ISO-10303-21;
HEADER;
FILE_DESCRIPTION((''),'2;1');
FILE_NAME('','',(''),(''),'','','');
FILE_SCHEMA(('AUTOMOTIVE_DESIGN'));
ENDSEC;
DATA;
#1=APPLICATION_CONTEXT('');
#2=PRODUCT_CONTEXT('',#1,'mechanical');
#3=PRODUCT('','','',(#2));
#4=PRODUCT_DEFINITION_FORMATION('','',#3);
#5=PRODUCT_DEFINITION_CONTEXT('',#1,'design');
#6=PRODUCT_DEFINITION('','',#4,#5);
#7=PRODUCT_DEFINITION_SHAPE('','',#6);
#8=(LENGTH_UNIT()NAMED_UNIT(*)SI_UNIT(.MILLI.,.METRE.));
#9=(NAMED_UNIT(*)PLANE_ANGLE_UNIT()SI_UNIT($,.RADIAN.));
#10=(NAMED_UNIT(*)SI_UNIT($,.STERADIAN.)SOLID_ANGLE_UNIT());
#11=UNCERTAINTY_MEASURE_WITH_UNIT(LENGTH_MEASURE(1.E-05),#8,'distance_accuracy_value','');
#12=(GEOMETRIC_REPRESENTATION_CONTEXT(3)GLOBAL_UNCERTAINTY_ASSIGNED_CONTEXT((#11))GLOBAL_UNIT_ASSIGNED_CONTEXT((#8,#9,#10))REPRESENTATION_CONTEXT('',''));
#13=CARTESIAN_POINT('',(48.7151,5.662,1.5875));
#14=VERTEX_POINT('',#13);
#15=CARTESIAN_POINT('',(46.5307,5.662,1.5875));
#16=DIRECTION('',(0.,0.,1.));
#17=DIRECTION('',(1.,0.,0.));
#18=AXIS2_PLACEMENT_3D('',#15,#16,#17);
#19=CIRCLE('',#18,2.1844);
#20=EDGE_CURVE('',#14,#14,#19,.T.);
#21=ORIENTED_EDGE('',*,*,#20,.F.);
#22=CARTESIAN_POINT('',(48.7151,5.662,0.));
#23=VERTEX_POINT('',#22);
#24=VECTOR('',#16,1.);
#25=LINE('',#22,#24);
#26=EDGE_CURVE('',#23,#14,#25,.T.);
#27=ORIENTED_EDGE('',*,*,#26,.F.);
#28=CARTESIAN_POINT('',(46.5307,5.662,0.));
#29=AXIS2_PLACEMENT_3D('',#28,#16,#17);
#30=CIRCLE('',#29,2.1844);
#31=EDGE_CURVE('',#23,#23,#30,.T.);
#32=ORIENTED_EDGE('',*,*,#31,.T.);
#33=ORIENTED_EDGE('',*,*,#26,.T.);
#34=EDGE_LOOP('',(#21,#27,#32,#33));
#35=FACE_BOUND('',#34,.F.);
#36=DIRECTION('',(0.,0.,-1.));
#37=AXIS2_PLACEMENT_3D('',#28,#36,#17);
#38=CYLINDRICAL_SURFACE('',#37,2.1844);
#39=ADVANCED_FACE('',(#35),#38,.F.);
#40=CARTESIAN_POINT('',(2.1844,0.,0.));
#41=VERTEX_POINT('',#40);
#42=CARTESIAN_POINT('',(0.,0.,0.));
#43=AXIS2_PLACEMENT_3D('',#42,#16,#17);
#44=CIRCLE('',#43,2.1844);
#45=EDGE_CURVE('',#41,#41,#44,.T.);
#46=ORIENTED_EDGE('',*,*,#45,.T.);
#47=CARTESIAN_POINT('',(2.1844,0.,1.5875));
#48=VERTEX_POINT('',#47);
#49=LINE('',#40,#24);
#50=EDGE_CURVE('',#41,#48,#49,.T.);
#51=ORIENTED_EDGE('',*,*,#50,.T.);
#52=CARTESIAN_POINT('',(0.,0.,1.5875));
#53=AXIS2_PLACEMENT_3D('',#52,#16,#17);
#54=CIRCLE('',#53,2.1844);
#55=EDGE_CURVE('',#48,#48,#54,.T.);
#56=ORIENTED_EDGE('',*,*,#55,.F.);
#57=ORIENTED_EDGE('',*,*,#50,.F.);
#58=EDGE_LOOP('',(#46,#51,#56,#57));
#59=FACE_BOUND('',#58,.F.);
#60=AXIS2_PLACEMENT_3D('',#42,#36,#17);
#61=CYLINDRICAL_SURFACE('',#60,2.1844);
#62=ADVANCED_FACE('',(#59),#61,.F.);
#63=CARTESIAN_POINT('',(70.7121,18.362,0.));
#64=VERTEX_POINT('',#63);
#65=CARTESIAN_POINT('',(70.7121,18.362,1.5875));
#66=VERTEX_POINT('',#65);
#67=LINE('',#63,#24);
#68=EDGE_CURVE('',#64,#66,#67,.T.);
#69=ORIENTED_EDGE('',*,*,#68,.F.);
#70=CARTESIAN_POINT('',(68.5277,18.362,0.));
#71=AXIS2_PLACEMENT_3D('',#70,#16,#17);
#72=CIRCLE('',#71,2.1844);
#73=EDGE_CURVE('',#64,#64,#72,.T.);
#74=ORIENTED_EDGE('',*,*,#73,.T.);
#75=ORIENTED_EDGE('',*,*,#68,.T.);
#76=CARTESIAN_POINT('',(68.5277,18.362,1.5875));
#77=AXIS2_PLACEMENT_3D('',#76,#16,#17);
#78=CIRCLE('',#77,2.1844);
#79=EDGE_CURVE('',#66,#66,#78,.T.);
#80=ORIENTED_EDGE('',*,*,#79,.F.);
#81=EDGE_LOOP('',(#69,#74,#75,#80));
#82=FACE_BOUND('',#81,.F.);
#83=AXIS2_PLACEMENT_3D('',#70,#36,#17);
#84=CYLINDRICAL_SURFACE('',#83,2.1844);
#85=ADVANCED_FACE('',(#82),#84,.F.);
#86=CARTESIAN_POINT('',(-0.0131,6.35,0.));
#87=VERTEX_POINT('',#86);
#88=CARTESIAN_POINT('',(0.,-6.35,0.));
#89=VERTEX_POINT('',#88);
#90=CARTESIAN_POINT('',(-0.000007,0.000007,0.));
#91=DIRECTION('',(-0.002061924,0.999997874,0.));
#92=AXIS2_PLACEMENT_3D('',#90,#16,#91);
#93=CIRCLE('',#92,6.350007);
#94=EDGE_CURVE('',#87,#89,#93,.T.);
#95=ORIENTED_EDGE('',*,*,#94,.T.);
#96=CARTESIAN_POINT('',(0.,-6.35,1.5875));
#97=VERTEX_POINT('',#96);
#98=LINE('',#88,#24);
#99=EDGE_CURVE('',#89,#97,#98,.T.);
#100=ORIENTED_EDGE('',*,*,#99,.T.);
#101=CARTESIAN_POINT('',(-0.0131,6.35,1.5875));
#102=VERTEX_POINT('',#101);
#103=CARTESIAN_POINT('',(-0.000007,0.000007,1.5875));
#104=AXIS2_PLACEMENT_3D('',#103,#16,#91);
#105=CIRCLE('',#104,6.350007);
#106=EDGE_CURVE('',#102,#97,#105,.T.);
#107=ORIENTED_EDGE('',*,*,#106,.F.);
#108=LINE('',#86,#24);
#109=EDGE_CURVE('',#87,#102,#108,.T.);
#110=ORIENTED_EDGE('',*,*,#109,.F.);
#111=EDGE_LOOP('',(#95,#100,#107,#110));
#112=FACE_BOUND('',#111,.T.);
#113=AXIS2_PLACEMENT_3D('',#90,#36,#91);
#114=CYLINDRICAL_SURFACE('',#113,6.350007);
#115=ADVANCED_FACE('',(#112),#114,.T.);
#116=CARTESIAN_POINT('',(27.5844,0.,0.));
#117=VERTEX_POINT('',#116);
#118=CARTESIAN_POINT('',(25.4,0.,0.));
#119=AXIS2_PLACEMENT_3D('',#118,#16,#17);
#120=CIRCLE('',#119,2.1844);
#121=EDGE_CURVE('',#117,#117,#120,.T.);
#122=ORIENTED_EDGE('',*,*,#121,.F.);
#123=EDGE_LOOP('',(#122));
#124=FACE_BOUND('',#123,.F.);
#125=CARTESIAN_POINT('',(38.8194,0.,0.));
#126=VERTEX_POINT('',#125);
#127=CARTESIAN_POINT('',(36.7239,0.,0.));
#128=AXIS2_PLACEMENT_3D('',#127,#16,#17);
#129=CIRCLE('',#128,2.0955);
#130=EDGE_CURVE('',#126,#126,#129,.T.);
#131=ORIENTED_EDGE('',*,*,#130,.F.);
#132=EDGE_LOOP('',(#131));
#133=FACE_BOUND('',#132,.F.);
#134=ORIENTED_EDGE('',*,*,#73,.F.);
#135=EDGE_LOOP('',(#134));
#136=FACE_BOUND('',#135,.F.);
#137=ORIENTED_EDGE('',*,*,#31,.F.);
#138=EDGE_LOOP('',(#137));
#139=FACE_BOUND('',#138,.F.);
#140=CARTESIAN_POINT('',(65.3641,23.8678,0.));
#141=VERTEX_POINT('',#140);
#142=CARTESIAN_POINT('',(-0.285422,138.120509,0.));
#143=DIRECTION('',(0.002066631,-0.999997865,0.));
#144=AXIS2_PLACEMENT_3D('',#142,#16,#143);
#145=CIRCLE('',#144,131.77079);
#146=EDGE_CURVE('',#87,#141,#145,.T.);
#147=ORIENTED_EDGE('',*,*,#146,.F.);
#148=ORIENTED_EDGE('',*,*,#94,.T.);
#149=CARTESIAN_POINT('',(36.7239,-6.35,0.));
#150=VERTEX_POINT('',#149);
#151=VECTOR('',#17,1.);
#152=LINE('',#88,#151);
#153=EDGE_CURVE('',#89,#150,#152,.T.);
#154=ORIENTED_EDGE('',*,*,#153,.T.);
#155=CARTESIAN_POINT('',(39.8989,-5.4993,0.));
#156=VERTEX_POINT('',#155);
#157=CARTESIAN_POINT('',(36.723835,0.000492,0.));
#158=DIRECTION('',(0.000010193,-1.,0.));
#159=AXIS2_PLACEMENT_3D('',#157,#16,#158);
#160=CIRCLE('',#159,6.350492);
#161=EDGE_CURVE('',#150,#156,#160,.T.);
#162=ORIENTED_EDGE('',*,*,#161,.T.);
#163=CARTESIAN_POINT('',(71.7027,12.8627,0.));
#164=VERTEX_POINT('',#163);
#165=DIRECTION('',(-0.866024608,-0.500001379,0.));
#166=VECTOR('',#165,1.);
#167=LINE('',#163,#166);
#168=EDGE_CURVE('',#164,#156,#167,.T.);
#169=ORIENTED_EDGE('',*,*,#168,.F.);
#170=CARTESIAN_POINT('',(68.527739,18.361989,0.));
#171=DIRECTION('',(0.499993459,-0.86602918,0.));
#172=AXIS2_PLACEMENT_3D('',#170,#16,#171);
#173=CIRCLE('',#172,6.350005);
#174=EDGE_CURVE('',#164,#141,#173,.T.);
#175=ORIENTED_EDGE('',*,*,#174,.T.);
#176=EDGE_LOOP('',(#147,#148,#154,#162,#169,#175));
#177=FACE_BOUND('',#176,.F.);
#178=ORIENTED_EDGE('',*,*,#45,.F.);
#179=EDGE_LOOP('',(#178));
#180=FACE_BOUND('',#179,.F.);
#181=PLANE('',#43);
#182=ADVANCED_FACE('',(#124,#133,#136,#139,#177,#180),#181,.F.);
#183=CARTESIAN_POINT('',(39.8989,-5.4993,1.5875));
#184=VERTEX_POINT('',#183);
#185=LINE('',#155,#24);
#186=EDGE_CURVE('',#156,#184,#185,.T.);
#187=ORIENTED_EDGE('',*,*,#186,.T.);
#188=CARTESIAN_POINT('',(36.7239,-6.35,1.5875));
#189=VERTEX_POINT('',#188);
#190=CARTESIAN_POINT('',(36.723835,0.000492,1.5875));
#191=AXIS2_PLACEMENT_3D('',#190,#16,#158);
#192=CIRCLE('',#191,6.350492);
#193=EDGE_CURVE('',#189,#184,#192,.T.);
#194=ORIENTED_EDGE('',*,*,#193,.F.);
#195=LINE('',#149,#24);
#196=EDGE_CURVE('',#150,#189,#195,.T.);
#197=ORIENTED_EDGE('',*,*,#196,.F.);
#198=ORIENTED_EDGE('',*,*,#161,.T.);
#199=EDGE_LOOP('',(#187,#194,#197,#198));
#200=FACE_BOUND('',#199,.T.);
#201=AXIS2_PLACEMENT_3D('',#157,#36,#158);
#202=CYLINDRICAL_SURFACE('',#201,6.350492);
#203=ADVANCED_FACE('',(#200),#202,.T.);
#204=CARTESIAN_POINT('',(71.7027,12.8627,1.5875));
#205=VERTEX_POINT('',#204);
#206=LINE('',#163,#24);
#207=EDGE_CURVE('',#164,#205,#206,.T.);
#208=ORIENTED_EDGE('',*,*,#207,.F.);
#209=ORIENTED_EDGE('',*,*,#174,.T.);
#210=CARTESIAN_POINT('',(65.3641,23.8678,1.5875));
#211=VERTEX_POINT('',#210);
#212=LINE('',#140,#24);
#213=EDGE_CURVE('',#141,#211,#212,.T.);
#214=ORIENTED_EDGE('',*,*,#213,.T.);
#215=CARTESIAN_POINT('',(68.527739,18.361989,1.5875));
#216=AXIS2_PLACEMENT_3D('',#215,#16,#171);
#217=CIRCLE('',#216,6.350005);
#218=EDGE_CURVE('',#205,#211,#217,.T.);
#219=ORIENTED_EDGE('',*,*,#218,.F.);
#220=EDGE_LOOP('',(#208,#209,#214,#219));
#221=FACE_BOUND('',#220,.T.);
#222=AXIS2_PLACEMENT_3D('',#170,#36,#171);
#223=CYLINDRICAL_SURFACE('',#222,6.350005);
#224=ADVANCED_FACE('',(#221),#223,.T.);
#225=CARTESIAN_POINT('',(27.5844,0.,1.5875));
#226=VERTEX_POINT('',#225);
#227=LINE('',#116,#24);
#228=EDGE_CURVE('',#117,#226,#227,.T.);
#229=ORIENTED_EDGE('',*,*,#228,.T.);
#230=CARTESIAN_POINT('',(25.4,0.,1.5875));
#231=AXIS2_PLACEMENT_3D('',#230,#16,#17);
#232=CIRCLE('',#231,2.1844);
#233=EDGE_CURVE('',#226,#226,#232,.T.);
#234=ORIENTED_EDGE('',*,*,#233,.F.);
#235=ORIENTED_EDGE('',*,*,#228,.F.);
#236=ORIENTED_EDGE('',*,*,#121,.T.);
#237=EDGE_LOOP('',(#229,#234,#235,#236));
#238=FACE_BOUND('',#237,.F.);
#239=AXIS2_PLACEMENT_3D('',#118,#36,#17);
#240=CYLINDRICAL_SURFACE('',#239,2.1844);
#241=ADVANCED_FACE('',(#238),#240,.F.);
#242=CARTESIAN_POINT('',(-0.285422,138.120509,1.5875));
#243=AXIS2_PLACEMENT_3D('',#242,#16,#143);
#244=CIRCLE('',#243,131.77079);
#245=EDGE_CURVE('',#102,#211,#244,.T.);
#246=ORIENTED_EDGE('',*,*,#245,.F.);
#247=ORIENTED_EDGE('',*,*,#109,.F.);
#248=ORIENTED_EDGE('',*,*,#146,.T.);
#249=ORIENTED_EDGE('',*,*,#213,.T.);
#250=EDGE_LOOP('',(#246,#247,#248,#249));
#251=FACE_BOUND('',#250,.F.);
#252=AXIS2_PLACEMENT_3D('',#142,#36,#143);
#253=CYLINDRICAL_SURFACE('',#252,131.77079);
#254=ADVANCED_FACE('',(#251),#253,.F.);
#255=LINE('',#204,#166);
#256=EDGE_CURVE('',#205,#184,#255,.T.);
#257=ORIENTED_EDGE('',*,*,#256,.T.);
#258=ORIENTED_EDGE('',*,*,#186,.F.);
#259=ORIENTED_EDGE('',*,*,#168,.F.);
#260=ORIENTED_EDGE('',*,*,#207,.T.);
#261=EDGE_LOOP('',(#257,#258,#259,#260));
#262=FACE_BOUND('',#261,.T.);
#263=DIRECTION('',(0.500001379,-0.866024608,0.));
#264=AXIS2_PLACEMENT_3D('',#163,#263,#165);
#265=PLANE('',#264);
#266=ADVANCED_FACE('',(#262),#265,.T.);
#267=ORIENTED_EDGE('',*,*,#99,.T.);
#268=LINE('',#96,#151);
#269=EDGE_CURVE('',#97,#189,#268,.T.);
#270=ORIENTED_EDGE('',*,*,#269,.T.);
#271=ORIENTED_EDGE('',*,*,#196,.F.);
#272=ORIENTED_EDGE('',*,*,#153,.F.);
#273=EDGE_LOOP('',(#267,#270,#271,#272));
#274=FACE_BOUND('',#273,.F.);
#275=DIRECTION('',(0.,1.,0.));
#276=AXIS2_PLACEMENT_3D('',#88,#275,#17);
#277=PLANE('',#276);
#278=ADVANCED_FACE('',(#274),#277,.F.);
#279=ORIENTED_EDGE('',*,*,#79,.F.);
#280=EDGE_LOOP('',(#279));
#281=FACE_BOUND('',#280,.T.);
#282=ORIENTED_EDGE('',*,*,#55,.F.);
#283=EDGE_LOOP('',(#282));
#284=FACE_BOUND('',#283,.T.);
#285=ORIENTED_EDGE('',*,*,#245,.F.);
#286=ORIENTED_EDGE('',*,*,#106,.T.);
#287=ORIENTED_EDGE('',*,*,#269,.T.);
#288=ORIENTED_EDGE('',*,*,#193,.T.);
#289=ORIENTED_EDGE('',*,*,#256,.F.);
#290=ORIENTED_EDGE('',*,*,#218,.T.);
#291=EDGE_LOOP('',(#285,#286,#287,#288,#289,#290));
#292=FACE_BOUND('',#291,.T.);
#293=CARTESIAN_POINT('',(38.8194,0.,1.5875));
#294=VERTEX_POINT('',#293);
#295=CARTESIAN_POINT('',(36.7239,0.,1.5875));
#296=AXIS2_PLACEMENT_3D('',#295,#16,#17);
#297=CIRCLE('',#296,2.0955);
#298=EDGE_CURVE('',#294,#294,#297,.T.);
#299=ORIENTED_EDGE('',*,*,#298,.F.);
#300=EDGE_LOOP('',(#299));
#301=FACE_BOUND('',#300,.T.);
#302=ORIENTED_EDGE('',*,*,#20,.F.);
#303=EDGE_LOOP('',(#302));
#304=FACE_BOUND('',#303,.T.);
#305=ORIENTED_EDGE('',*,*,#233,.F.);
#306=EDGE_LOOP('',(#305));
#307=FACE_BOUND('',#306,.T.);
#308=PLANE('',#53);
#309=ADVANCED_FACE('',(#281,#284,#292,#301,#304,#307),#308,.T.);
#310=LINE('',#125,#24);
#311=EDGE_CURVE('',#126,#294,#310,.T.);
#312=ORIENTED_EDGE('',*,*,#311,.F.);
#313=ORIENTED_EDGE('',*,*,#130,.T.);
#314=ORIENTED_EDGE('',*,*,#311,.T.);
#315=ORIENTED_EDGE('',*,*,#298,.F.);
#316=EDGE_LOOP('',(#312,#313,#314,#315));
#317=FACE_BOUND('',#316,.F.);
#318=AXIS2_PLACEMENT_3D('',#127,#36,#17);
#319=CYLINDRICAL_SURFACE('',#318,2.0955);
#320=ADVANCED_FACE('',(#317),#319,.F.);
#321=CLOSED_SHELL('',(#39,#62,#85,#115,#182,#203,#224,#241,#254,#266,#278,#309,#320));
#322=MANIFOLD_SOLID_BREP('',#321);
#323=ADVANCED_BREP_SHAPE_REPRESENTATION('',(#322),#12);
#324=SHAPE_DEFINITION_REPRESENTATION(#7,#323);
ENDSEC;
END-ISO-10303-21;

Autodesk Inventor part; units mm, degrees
ref_plane "YZ Plane" through (0, 0, 0) normal (1, 0, 0) x (0, 1, 0)
ref_plane "XZ Plane" through (0, 0, 0) normal (0, 1, 0) x (-1, 0, 0)
ref_plane "XY Plane" through (0, 0, 0) normal (0, 0, 1) x (1, 0, 0)
sketch "main" plane through (0, 0, 0) normal (0, 0, 1) x (1, 0, 0)
  circle A0 centre (-6.1105, -12.0036) radius 2.1844
  circle A1 centre (-31.5105, -12.0036) radius 2.1844
  circle A2 centre (15.0202, -6.3416) radius 2.1844
  circle A3 centre (37.0172, 6.3584) radius 2.1844
  arc A4 (-31.5236, -5.6536) -> (-31.5105, -18.3536) centre (-31.5105, -12.0036) ccw
  arc A5 (40.1922, 0.8591) -> (33.8536, 11.8642) centre (37.0172, 6.3584) ccw
  arc A6 (-31.5236, -5.6536) -> (33.8536, 11.8642) centre (-31.796, 126.1175) ccw
  line L0 (-31.5105, -18.3536) -> (5.2134, -18.3536)
  line L1 (40.1922, 0.8591) -> (8.3884, -17.5028)
  circle A7 centre (5.2134, -12.0036) radius 2.0955
  arc A8 (5.2134, -18.3536) -> (8.3884, -17.5028) centre (5.2134, -12.0036) ccw
  line L2 (5.2134, -12.0036) -> (43.3134, -12.0036) construction
  point P0 (-0.7926, -1.6009)
  dimension "d0" = 12.7
  dimension "d3" = 12.7
  dimension "d7" = 4.191
  dimension "d8" = 6.35
  dimension "d13" = 25.4
sketch "Sketch1" plane through (0, 0, 0) normal (0, 0, 1) x (1, 0, 0)
  circle A0 centre (25.4, 0) radius 2.1844
  circle A1 centre (0, 0) radius 2.1844
  circle A2 centre (46.5307, 5.662) radius 2.1844
  circle A3 centre (68.5277, 18.362) radius 2.1844
  arc A4 (-0.0131, 6.35) -> (0, -6.35) centre (0, 0) ccw
  arc A5 (71.7027, 12.8627) -> (65.3641, 23.8678) centre (68.5277, 18.362) ccw
  arc A6 (-0.0131, 6.35) -> (65.3641, 23.8678) centre (-0.2855, 138.1211) ccw
  line L0 (0, -6.35) -> (36.7239, -6.35)
  line L1 (71.7027, 12.8627) -> (39.8989, -5.4993)
  circle A7 centre (36.7239, 0) radius 2.0955
  arc A8 (36.7239, -6.35) -> (39.8989, -5.4993) centre (36.7239, 0) ccw
  line L2 (36.7239, 0) -> (74.8239, 0) construction
extrude "Extrusion1" add sketch "Sketch1" along normal blind 1.5875
properties part number "60 Degree Gusset" material "Acetal Resin, White"
